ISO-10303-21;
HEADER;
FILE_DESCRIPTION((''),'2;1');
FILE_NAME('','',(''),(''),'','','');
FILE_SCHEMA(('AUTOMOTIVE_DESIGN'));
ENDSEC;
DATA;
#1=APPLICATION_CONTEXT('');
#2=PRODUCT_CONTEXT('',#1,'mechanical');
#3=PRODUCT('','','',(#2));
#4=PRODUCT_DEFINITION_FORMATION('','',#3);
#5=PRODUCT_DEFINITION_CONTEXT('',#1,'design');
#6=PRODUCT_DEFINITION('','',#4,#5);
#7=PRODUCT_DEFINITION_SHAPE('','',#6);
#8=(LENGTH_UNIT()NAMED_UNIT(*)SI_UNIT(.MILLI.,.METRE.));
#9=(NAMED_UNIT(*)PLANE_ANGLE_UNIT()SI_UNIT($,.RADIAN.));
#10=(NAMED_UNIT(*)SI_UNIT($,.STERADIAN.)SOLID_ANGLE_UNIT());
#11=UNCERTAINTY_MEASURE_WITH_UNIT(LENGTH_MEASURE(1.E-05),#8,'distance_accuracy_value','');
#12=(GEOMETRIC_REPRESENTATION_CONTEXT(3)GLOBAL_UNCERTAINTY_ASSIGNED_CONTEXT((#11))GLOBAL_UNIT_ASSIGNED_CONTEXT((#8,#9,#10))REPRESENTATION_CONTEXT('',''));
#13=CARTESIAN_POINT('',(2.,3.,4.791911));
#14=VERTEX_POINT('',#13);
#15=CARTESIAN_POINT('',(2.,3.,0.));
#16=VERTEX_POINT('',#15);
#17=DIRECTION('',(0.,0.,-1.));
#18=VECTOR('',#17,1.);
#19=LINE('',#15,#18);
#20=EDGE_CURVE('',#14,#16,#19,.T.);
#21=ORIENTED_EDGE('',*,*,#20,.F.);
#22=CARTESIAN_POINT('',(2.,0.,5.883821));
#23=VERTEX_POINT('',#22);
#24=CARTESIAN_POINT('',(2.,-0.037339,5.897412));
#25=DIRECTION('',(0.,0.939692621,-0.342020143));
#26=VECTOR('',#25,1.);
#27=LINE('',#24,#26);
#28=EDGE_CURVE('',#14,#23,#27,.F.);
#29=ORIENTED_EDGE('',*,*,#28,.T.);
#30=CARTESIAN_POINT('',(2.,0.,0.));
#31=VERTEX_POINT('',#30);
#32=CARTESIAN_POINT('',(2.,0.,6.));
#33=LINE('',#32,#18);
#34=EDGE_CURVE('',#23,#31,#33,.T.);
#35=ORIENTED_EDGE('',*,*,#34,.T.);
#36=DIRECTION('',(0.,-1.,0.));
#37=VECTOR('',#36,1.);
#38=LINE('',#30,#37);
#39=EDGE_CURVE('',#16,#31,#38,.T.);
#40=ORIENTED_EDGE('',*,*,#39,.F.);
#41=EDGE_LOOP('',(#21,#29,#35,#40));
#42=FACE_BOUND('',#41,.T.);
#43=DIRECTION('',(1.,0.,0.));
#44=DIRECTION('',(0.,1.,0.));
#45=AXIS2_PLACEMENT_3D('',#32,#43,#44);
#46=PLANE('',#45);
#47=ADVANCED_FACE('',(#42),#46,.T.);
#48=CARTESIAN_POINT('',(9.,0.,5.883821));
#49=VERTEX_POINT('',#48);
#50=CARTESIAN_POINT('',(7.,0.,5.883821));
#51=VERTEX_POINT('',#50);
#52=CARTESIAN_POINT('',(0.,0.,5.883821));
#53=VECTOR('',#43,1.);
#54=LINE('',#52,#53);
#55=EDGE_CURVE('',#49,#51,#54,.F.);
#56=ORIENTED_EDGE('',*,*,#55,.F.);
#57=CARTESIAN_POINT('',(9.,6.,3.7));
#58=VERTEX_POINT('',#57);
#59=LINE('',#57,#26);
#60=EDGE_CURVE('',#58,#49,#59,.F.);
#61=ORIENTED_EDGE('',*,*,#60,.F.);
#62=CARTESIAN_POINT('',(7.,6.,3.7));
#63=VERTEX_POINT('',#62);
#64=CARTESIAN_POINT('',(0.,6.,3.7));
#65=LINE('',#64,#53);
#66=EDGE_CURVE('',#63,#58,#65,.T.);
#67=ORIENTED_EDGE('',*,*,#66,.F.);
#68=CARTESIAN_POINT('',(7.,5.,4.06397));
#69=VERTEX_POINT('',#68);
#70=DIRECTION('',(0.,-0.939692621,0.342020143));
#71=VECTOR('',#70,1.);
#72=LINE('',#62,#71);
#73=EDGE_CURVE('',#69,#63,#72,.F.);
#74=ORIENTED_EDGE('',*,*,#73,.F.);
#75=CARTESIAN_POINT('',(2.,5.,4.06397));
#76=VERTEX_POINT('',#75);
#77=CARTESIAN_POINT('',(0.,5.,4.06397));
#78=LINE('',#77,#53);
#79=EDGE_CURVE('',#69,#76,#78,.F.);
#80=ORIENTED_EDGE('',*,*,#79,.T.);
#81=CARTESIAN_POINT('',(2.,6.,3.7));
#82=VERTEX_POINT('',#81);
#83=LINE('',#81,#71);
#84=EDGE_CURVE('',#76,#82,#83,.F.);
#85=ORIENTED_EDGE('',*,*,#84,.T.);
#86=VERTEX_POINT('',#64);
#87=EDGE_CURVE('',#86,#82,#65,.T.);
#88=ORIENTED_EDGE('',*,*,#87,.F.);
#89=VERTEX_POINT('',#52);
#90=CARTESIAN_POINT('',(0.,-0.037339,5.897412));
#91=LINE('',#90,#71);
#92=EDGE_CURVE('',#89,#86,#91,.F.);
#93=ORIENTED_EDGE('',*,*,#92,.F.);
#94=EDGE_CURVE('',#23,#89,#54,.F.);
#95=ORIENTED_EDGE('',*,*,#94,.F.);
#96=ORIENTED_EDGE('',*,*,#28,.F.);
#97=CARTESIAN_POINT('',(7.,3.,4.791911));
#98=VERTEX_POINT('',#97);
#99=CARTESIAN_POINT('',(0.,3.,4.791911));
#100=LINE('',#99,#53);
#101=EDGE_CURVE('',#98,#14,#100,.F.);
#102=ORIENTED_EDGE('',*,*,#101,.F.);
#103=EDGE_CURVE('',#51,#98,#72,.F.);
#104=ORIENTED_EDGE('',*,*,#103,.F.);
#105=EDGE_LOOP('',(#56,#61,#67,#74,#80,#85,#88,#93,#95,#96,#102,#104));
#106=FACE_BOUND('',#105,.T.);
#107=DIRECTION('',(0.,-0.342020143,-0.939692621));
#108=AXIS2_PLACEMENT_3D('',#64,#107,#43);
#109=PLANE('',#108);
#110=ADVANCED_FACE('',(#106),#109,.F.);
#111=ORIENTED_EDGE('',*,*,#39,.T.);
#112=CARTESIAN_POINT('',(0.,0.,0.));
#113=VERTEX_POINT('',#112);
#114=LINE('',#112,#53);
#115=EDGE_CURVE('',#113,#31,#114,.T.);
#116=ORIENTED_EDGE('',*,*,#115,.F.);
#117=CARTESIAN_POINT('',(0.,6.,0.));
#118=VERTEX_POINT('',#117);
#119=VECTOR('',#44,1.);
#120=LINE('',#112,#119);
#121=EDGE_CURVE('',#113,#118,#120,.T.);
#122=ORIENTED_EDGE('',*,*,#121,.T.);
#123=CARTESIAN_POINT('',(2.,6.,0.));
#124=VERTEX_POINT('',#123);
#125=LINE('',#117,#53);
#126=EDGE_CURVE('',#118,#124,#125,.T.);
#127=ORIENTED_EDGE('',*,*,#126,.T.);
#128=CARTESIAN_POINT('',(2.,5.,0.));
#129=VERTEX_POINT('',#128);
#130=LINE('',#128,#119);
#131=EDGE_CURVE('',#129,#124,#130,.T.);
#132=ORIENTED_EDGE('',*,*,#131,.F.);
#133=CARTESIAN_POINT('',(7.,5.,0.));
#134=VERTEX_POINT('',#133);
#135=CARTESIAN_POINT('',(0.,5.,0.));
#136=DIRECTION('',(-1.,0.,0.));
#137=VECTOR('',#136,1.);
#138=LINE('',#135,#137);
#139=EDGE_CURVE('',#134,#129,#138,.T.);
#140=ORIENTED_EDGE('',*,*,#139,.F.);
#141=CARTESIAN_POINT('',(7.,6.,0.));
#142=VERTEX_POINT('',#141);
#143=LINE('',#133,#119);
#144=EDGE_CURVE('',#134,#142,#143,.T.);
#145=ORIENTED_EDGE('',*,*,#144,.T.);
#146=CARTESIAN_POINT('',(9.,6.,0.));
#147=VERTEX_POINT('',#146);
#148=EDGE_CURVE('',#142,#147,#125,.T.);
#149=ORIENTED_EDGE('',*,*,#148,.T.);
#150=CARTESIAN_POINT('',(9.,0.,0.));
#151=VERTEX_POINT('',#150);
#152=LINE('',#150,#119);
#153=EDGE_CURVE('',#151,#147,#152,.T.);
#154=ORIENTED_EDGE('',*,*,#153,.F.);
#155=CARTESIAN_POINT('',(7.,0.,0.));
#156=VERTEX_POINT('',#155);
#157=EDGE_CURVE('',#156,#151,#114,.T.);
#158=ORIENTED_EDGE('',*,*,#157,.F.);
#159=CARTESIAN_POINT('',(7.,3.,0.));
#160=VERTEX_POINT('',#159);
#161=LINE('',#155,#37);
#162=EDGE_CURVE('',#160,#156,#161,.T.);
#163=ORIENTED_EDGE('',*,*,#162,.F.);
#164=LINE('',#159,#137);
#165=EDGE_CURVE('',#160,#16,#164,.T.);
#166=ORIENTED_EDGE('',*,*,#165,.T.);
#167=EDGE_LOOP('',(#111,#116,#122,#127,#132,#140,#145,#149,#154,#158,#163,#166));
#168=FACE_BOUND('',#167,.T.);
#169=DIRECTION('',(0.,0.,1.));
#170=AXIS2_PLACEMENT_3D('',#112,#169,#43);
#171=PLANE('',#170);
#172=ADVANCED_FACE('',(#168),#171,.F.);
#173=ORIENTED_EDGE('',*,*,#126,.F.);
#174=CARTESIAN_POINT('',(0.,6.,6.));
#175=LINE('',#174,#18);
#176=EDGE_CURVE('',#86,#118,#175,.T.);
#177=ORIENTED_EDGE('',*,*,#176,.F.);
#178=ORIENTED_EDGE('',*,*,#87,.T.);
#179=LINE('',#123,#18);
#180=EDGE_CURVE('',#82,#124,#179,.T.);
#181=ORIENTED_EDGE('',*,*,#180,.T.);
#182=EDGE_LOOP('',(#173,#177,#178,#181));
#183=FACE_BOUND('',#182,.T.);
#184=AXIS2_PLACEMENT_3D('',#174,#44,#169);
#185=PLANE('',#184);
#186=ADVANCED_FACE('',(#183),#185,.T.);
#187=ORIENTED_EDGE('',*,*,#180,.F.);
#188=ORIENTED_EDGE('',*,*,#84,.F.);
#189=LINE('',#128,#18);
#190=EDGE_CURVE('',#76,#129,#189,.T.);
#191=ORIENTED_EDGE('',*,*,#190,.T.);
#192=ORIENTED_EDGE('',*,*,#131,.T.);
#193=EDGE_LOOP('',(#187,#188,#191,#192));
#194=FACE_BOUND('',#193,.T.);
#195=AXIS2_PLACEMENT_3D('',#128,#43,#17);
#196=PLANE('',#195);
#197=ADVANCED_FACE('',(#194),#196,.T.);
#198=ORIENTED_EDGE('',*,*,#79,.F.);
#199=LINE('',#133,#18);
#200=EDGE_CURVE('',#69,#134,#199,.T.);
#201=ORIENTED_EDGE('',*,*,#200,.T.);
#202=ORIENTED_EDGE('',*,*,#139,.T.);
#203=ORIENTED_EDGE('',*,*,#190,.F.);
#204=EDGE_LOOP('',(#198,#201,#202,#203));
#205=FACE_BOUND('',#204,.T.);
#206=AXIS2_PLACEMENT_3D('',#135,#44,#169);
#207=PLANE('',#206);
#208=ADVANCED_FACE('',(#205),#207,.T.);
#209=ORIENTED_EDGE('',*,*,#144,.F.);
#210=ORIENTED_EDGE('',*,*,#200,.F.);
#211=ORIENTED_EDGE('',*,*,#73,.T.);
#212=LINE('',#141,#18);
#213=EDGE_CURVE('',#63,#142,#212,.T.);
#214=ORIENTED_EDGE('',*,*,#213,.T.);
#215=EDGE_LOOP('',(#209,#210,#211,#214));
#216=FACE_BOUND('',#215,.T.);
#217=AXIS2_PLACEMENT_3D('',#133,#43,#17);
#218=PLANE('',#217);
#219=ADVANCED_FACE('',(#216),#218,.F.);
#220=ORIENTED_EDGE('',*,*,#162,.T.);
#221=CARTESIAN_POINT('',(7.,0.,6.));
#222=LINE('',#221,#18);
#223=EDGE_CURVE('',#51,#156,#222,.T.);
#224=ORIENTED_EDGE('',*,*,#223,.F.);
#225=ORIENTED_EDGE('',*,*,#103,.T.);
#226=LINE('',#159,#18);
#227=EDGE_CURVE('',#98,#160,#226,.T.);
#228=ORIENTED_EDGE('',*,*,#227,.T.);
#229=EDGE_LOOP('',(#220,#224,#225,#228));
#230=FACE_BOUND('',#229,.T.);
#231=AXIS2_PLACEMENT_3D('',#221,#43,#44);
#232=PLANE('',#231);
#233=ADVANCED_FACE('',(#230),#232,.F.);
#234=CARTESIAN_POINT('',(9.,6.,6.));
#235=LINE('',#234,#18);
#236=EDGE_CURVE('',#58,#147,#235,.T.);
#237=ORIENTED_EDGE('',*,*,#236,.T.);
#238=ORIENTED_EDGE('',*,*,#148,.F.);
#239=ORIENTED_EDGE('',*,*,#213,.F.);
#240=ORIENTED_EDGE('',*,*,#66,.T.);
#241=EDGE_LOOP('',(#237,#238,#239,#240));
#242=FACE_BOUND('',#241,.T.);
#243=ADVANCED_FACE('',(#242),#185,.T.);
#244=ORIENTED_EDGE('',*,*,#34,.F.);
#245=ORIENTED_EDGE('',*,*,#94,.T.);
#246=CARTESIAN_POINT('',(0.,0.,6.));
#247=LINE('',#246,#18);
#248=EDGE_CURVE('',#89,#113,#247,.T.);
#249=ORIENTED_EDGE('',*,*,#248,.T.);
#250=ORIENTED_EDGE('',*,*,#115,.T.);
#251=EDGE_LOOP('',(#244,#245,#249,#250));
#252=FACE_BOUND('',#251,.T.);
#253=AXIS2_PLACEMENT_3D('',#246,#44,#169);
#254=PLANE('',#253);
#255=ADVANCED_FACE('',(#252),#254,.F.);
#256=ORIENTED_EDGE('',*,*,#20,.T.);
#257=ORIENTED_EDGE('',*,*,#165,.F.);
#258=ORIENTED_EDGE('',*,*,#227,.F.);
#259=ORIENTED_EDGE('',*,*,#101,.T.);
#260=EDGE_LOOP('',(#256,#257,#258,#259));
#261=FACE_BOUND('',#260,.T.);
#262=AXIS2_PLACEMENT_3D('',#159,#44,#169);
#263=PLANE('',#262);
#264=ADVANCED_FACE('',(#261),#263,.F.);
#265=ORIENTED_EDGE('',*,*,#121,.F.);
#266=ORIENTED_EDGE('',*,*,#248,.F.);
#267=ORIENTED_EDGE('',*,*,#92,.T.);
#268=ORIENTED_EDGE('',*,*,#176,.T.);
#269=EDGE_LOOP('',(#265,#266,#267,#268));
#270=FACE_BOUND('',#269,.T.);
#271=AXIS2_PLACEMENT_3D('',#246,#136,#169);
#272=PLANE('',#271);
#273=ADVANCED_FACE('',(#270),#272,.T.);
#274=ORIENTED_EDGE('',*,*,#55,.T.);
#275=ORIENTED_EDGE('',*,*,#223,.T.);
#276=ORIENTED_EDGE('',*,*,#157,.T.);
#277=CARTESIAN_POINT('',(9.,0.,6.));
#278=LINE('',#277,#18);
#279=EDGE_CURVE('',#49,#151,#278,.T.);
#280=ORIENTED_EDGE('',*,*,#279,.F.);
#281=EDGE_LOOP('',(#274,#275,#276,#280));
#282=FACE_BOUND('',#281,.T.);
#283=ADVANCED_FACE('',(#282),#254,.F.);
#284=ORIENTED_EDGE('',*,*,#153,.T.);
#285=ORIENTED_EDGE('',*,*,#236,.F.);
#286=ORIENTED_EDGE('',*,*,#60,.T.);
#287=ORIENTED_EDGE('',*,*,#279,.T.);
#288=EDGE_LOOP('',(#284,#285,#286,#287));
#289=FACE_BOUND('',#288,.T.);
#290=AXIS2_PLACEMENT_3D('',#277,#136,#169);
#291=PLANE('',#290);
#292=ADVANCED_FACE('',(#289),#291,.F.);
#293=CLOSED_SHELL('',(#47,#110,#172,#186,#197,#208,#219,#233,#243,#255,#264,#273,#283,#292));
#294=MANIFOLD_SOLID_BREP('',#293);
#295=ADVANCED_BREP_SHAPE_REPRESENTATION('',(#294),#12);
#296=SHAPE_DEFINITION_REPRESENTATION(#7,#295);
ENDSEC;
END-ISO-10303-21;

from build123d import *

# Parameters (mm, degrees)
SZKIC1_W                      = 2
SZKIC1_H                      = 6
DODANIE_WYCI_GNI_CIE1_DEPTH   = 6
DODANIE_WYCI_GNI_CIE1_2_DEPTH = 6
SZKIC3_W                      = 6
SZKIC3_H                      = 3
DODANIE_WYCI_GNI_CIE2_DEPTH   = 5
SFAZOWANIE2_SIZE              = 6.319198065
SFAZOWANIE2_SIZE_2            = 2.3
SZKIC5_W                      = 5
SZKIC5_H                      = 3.7
SZKIC5_H_2                    = 1.091910703
WYTNIJ_WYCI_GNI_CIE1_DEPTH    = 1


with BuildPart() as part:
    # Szkic1 → Dodanie-wyciągnięcie1 (new body)
    with BuildSketch(Plane.XY):
        with Locations((1, 3)):
            Rectangle(SZKIC1_W, SZKIC1_H)
    extrude(amount=DODANIE_WYCI_GNI_CIE1_DEPTH)



with BuildPart() as body_2:
    # Szkic1 → Dodanie-wyci_gni_cie1 2 (new body)
    with BuildSketch(Plane.XY):
        with Locations((8, 3)):
            Rectangle(SZKIC1_W, SZKIC1_H)
    extrude(amount=DODANIE_WYCI_GNI_CIE1_2_DEPTH)


with BuildPart() as part_1:
    add(part.part)

    add(body_2.part)  # Dodanie-wyciągnięcie2 merges body 2
    # Szkic3 → Dodanie-wyciągnięcie2 (add)
    with BuildSketch(Plane(origin=(2, 0, 0), x_dir=(0, 0, -1), z_dir=(1, 0, 0))):
        with Locations((-3, 4.5)):
            Rectangle(SZKIC3_W, SZKIC3_H)
    extrude(amount=DODANIE_WYCI_GNI_CIE2_DEPTH)

    # Sfazowanie2
    # the kernel refuses this chamfer: 6.319198065, 2.3 mm, written as the material it takes off along each edge
    with BuildSketch(Plane(origin=(-16.393230334, 6, 6), x_dir=(0, -0.9999130865277316, 0.013184058198645751), z_dir=(1, 0, 0))) as sfazowanie2_piece_1:
        Polygon((SFAZOWANIE2_SIZE * 0.999913086487, SFAZOWANIE2_SIZE * 0.0131840581981), (-SFAZOWANIE2_SIZE_2 * 0.0131840581986, SFAZOWANIE2_SIZE_2 * 0.999913086528), (0, 0), align=None)
    extrude(amount=41.786460667, mode=Mode.SUBTRACT)

    # Szkic5 → Wytnij-wyciągnięcie1 (cut)
    with BuildSketch(Plane(origin=(0, 6, 0), x_dir=(1, 0, 0), z_dir=(0, 1, 0))):
        with Locations((4.5, -1.85)):
            Rectangle(SZKIC5_W, SZKIC5_H)
        with Locations((4.5, -4.245955352)):
            Rectangle(SZKIC5_W, SZKIC5_H_2)
    extrude(amount=-WYTNIJ_WYCI_GNI_CIE1_DEPTH, mode=Mode.SUBTRACT)


solid = part_1.part
